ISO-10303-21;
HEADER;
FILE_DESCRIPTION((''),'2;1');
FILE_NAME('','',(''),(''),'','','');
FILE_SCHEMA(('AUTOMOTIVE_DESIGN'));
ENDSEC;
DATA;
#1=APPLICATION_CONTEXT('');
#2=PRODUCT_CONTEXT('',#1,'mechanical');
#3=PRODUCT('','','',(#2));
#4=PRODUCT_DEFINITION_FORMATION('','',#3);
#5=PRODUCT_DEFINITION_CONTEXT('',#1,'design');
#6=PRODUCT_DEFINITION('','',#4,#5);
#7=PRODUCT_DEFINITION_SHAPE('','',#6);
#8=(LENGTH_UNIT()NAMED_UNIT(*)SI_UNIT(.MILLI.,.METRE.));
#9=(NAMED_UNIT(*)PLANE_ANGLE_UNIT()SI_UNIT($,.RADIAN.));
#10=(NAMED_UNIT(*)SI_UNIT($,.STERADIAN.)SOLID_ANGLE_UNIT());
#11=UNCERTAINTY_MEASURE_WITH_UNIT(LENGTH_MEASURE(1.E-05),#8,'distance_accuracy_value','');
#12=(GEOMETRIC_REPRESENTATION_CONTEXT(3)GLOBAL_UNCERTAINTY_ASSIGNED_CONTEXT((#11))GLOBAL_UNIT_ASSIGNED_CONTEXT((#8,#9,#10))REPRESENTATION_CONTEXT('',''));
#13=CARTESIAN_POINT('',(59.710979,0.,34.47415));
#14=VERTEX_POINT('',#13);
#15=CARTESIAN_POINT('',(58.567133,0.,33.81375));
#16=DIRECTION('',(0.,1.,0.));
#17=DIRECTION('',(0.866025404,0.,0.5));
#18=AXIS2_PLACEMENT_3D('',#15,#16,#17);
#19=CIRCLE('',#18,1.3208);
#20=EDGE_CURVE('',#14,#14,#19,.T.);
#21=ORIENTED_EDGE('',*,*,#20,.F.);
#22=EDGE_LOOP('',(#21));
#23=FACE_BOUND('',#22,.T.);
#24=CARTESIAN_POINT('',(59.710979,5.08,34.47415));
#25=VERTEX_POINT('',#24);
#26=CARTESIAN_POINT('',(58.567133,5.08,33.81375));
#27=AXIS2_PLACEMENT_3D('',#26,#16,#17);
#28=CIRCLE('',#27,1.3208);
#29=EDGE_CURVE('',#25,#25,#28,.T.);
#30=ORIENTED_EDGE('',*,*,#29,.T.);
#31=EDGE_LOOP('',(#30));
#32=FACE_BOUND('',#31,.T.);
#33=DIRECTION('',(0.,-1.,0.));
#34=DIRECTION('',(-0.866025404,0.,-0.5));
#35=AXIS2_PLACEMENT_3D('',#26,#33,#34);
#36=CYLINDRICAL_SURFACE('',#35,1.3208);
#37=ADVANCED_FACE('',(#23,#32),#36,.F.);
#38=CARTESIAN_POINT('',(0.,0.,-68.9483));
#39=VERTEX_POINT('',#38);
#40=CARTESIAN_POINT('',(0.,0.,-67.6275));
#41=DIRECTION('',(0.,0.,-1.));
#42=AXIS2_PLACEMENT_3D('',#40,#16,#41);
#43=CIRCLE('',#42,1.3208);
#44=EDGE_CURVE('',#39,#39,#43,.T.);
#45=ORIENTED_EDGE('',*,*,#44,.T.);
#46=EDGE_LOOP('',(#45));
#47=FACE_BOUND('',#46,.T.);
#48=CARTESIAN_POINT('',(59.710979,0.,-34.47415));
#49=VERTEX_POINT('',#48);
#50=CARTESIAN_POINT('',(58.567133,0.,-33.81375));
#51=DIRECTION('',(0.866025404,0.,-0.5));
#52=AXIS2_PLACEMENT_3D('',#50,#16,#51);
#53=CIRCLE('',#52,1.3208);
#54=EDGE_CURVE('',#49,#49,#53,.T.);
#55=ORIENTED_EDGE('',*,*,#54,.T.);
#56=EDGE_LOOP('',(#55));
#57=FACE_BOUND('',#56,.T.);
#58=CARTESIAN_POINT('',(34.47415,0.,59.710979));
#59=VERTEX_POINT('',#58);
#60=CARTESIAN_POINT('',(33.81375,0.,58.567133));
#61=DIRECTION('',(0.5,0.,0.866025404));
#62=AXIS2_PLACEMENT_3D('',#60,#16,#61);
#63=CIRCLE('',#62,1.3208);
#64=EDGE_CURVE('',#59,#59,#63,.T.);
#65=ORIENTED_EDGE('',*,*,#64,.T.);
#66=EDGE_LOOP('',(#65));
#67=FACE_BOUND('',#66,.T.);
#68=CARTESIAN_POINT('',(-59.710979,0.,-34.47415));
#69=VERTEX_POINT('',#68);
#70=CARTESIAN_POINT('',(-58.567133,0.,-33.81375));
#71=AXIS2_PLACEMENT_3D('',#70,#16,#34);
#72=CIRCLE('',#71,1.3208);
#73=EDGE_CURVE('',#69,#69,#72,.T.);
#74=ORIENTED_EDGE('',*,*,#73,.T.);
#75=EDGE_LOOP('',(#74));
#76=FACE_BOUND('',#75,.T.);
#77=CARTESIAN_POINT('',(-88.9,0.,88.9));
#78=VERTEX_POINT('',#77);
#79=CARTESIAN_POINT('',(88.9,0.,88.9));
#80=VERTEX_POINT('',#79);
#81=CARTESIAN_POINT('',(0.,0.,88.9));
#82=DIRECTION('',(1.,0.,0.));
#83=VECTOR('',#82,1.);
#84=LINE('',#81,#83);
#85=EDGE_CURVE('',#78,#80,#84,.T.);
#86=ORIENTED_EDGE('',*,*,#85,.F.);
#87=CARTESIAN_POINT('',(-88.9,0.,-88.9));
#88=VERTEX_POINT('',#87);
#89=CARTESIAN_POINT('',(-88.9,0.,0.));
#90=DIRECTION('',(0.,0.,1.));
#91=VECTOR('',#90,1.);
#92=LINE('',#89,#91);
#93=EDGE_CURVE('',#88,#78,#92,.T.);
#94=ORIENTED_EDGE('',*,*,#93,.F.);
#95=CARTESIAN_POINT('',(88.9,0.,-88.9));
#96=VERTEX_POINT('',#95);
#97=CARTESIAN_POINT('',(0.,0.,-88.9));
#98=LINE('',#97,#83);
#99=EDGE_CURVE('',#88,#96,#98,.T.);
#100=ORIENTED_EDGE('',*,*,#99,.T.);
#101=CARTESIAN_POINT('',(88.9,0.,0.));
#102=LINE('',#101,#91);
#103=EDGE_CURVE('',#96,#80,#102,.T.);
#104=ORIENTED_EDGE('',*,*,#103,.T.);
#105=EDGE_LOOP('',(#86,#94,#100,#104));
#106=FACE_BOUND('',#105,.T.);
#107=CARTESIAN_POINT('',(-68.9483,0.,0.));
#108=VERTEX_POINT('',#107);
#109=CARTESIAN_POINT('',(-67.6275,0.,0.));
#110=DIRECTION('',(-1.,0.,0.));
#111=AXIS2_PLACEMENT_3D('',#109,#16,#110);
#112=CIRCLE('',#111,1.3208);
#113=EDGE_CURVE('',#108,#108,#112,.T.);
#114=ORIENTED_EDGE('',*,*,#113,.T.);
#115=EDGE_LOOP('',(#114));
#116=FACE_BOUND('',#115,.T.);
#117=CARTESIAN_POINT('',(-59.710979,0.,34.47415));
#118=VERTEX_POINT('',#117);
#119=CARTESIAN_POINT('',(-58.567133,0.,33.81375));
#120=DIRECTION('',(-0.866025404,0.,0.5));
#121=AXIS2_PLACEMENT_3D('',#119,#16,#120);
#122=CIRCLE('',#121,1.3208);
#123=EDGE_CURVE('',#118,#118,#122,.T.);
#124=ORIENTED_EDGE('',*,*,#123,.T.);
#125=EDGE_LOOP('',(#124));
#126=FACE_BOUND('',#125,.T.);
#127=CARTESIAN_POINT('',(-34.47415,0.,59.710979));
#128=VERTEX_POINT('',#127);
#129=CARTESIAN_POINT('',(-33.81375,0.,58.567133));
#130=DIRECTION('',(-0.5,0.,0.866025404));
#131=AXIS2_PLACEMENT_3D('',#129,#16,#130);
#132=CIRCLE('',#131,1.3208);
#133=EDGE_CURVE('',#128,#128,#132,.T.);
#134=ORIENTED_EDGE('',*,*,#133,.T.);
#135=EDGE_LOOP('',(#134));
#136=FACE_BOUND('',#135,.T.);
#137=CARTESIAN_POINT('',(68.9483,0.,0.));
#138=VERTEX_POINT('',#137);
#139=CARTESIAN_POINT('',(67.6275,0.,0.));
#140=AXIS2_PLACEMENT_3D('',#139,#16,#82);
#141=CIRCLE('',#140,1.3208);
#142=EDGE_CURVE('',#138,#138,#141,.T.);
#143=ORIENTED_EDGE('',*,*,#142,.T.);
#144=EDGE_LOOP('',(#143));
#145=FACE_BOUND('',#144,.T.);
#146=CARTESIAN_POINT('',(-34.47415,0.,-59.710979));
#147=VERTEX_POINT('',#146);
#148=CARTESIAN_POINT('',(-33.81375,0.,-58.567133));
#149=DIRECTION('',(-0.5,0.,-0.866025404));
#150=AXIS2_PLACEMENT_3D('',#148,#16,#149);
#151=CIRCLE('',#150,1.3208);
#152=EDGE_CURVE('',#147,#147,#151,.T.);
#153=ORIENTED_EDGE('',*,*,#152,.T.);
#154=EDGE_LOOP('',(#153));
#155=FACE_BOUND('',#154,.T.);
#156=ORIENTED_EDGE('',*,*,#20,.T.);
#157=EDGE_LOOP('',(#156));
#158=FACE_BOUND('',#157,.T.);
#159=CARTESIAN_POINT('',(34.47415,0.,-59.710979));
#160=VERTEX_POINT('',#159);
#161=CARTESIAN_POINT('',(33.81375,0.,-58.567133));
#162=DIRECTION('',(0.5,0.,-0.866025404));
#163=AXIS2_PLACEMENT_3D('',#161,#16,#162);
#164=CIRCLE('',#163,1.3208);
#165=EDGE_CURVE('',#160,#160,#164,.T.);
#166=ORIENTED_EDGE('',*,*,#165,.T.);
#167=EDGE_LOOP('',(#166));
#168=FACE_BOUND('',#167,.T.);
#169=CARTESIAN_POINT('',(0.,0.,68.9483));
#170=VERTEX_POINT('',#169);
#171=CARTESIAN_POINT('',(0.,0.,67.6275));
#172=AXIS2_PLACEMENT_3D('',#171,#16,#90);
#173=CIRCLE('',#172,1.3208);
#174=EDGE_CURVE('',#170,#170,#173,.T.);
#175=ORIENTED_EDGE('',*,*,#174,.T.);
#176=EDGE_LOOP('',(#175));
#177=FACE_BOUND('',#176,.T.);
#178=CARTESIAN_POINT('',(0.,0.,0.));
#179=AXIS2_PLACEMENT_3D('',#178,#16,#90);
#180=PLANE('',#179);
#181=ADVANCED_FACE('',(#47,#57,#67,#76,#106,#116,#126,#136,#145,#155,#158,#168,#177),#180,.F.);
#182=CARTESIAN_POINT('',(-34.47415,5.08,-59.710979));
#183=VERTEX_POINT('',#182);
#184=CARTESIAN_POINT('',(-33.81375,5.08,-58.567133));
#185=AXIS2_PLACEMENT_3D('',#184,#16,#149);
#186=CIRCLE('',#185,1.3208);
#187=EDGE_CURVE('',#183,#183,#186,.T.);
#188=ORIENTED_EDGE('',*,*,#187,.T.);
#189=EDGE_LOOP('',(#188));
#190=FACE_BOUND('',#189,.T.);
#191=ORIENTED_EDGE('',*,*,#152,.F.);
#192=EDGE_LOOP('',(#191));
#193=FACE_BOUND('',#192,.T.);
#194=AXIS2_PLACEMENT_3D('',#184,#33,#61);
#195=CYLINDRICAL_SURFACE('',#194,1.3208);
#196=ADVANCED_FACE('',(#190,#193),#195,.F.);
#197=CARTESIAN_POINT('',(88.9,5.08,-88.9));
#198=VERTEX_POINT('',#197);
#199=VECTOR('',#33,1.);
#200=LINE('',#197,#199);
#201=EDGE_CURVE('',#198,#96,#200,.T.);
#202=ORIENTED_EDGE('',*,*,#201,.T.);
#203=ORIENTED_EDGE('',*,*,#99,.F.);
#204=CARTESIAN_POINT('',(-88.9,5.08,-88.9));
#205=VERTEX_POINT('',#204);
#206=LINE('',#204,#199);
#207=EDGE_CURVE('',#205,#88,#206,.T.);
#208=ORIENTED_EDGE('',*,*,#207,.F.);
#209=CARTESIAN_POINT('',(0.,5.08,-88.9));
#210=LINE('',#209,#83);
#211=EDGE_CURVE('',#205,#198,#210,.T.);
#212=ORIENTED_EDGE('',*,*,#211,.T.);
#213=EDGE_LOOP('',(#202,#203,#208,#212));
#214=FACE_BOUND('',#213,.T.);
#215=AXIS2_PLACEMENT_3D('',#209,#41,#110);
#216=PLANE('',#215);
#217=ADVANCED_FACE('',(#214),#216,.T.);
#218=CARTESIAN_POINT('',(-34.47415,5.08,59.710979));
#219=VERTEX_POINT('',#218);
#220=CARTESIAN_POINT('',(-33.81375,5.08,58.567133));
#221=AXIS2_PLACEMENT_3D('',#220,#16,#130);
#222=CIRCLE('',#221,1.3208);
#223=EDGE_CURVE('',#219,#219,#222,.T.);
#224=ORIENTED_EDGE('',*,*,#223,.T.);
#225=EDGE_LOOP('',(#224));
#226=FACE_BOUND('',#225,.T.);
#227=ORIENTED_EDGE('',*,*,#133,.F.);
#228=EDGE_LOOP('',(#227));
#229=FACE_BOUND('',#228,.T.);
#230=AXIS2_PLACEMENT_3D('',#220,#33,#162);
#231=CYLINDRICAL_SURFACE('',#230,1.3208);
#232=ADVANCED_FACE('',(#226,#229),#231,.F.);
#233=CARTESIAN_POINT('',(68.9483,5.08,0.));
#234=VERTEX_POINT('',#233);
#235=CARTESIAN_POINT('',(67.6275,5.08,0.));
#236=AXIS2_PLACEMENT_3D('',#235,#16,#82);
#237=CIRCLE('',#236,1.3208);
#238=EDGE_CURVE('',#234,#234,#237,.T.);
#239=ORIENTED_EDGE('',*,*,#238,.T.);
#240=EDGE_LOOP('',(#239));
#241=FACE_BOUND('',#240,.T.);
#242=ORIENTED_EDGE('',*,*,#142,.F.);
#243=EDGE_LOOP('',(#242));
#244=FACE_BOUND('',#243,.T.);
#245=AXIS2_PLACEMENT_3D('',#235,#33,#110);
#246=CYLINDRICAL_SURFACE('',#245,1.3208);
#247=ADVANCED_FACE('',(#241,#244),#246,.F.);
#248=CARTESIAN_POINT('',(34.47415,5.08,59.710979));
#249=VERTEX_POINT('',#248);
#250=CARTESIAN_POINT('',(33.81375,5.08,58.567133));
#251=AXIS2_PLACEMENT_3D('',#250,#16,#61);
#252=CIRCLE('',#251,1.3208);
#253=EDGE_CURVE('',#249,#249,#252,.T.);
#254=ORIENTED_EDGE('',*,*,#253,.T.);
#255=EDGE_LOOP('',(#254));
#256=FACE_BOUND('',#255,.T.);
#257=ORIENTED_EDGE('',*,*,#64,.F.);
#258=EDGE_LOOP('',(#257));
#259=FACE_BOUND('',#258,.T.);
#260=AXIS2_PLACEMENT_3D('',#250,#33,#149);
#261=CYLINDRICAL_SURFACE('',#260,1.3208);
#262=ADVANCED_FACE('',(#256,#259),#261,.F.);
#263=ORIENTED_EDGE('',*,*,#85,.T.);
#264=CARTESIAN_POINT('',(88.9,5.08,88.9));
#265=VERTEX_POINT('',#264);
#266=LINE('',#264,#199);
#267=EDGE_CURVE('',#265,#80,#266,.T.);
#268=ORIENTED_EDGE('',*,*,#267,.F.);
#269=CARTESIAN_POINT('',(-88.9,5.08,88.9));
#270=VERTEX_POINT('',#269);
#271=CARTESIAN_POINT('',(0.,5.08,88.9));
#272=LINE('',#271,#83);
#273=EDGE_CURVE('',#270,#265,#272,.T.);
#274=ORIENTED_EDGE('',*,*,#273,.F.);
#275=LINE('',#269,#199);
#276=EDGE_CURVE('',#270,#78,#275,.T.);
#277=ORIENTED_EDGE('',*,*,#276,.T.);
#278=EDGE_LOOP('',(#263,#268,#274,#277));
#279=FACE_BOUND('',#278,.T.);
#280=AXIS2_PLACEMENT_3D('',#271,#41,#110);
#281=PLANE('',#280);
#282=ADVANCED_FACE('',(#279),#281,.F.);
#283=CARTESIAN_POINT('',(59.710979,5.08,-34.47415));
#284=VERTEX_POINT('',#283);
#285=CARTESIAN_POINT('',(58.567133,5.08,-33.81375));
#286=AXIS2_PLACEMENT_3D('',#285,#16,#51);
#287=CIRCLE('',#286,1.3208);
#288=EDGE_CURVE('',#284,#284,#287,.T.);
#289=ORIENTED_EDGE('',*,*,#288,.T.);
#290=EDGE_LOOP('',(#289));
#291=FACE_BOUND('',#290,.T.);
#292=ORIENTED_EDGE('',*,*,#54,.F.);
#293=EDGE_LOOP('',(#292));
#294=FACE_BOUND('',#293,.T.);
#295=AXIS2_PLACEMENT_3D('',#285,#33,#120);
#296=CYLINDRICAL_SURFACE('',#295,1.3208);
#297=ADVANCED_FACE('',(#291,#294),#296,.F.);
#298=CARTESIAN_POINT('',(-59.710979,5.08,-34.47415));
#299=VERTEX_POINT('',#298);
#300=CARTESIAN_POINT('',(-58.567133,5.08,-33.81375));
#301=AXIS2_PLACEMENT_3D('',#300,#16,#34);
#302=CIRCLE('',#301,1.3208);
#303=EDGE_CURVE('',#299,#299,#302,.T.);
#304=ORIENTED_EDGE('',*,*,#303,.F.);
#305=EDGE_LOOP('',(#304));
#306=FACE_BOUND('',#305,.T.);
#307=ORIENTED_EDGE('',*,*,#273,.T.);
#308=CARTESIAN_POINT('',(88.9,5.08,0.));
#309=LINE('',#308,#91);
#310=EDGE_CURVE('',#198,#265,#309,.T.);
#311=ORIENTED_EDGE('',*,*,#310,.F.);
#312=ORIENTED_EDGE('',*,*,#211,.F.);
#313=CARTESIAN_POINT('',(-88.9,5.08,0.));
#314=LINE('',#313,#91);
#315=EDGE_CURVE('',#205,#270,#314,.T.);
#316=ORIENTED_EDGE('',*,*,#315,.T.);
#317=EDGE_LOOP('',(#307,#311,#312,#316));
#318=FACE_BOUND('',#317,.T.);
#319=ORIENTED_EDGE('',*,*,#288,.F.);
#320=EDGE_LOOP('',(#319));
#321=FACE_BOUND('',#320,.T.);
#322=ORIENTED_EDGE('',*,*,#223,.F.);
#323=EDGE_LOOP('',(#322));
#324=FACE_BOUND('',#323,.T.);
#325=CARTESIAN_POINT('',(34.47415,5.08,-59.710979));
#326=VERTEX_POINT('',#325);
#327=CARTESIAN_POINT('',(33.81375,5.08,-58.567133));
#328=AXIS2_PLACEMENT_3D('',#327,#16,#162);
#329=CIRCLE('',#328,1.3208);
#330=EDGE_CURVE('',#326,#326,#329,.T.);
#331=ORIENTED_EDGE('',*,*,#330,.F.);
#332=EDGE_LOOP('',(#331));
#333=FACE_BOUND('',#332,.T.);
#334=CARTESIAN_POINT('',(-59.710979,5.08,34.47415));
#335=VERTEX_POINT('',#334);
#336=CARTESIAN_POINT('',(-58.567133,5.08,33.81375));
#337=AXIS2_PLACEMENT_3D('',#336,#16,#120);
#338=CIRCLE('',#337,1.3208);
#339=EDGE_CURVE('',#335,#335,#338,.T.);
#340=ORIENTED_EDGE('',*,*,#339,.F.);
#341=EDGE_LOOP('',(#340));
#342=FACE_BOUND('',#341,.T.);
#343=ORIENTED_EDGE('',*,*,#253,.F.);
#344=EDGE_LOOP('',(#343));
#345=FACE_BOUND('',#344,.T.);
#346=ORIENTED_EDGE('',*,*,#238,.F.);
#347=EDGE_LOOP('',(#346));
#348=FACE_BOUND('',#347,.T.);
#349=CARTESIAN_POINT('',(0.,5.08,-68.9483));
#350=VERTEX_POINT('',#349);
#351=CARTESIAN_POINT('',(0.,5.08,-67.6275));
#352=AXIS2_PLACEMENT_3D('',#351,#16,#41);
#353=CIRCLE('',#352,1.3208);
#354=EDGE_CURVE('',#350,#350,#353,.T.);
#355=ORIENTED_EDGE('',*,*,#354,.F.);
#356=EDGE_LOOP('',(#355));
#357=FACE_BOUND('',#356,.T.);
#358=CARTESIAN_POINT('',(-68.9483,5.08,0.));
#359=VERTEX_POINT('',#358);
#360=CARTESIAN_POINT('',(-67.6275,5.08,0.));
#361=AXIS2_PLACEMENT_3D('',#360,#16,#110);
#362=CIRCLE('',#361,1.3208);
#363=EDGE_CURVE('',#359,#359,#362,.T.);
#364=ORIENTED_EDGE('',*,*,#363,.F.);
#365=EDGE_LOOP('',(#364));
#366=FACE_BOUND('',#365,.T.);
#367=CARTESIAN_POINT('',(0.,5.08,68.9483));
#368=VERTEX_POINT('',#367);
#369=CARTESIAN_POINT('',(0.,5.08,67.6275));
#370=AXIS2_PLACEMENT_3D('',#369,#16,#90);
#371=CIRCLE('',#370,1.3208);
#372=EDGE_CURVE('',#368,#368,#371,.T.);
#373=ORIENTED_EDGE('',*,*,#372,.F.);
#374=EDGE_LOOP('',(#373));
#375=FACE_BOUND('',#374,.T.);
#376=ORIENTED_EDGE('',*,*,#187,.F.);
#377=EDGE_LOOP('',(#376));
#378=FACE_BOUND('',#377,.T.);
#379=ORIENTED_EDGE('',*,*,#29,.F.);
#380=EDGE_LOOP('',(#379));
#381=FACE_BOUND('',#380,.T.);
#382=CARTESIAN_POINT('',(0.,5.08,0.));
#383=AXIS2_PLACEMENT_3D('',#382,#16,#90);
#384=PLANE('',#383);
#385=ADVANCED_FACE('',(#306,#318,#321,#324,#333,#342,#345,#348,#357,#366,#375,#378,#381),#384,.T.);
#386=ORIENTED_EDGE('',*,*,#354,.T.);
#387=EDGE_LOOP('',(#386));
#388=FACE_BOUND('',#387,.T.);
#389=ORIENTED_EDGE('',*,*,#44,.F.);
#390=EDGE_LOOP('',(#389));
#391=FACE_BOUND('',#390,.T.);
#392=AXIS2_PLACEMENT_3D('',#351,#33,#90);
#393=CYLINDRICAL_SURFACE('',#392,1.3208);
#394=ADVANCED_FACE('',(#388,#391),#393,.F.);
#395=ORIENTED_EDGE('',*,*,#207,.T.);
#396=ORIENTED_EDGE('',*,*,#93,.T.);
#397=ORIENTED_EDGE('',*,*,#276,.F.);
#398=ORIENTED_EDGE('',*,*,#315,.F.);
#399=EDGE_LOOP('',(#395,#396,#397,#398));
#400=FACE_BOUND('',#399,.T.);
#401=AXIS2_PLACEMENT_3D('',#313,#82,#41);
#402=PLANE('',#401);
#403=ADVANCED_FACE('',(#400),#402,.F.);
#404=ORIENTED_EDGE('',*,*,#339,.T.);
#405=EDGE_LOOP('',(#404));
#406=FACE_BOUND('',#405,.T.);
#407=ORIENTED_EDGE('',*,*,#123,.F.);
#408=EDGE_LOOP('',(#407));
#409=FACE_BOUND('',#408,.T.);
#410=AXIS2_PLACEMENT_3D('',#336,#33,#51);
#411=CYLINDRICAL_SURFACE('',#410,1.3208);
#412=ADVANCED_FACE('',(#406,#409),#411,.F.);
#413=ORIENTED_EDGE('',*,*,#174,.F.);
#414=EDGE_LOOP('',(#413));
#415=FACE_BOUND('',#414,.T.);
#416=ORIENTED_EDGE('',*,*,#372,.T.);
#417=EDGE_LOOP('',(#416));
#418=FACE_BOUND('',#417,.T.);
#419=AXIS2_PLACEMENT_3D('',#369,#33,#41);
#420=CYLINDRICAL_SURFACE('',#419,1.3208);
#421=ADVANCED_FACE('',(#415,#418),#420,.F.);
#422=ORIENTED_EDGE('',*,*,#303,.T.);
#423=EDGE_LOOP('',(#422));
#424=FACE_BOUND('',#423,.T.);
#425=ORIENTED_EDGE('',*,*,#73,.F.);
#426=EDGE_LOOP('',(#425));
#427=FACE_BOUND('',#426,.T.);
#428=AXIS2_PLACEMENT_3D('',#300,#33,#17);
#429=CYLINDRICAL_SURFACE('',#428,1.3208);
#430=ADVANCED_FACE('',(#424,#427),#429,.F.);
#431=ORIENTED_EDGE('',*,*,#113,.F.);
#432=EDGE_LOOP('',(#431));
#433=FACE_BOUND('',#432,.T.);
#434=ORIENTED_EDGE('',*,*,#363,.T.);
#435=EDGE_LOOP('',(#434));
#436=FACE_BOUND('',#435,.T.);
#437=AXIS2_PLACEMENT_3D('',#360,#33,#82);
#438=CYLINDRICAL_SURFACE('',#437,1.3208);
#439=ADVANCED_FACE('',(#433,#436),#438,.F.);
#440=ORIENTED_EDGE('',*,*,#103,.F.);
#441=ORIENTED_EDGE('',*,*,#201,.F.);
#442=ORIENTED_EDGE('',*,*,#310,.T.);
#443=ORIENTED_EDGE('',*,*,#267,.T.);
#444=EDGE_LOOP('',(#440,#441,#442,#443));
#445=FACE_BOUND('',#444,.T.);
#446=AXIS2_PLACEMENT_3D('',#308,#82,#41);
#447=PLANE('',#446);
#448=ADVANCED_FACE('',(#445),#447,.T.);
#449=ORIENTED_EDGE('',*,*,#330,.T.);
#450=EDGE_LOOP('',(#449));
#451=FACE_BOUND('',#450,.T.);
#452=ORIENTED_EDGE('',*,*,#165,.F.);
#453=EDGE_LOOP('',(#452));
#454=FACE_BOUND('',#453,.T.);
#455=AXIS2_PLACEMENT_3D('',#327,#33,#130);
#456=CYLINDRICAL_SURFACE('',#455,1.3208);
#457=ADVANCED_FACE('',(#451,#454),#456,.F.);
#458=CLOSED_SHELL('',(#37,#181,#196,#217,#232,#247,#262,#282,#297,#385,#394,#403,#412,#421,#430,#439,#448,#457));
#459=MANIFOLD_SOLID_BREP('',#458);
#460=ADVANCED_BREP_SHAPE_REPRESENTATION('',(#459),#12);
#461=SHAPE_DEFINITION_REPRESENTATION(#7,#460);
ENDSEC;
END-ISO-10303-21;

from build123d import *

# Parameters (mm, degrees)
SKETCH1_W             = 177.8
SKETCH1_H             = 177.8
SKETCH1_R             = 1.3208
BOSS_EXTRUDE1_DEPTH   = 5.08
CIRPATTERN1_OUTLINE_R = 1.3208
CIRPATTERN1_DEPTH     = 5.08


# Read off the part's stored shape, not the designer's step: CirPattern1
with BuildPart() as part:
    # Sketch1 → Boss-Extrude1 (new body)
    with BuildSketch(Plane(origin=(0, 0, 0), x_dir=(1, 0, 0), z_dir=(0, 1, 0))):
        Rectangle(SKETCH1_W, SKETCH1_H)
        with Locations(Location((0, -67.6275, 0), (0, 0, 270))):
            Circle(SKETCH1_R, mode=Mode.SUBTRACT)
    extrude(amount=BOSS_EXTRUDE1_DEPTH)

    # CirPattern1 outline → CirPattern1 (cut)
    with BuildSketch(Plane(origin=(0, 0, 0), x_dir=(1, 0, 0), z_dir=(0, 1, 0))):
        with Locations((33.81375, -58.567132994)):
            Circle(CIRPATTERN1_OUTLINE_R)
        with Locations((58.567132994, -33.81375)):
            Circle(CIRPATTERN1_OUTLINE_R)
        with Locations((67.6275, 0)):
            Circle(CIRPATTERN1_OUTLINE_R)
        with Locations((58.567132994, 33.81375)):
            Circle(CIRPATTERN1_OUTLINE_R)
        with Locations((33.81375, 58.567132994)):
            Circle(CIRPATTERN1_OUTLINE_R)
        with Locations((0, 67.6275)):
            Circle(CIRPATTERN1_OUTLINE_R)
        with Locations((-33.81375, 58.567132994)):
            Circle(CIRPATTERN1_OUTLINE_R)
        with Locations((-58.567132994, 33.81375)):
            Circle(CIRPATTERN1_OUTLINE_R)
        with Locations((-67.6275, 0)):
            Circle(CIRPATTERN1_OUTLINE_R)
        with Locations((-58.567132994, -33.81375)):
            Circle(CIRPATTERN1_OUTLINE_R)
        with Locations((-33.81375, -58.567132994)):
            Circle(CIRPATTERN1_OUTLINE_R)
    extrude(amount=CIRPATTERN1_DEPTH, mode=Mode.SUBTRACT)


solid = part.part
